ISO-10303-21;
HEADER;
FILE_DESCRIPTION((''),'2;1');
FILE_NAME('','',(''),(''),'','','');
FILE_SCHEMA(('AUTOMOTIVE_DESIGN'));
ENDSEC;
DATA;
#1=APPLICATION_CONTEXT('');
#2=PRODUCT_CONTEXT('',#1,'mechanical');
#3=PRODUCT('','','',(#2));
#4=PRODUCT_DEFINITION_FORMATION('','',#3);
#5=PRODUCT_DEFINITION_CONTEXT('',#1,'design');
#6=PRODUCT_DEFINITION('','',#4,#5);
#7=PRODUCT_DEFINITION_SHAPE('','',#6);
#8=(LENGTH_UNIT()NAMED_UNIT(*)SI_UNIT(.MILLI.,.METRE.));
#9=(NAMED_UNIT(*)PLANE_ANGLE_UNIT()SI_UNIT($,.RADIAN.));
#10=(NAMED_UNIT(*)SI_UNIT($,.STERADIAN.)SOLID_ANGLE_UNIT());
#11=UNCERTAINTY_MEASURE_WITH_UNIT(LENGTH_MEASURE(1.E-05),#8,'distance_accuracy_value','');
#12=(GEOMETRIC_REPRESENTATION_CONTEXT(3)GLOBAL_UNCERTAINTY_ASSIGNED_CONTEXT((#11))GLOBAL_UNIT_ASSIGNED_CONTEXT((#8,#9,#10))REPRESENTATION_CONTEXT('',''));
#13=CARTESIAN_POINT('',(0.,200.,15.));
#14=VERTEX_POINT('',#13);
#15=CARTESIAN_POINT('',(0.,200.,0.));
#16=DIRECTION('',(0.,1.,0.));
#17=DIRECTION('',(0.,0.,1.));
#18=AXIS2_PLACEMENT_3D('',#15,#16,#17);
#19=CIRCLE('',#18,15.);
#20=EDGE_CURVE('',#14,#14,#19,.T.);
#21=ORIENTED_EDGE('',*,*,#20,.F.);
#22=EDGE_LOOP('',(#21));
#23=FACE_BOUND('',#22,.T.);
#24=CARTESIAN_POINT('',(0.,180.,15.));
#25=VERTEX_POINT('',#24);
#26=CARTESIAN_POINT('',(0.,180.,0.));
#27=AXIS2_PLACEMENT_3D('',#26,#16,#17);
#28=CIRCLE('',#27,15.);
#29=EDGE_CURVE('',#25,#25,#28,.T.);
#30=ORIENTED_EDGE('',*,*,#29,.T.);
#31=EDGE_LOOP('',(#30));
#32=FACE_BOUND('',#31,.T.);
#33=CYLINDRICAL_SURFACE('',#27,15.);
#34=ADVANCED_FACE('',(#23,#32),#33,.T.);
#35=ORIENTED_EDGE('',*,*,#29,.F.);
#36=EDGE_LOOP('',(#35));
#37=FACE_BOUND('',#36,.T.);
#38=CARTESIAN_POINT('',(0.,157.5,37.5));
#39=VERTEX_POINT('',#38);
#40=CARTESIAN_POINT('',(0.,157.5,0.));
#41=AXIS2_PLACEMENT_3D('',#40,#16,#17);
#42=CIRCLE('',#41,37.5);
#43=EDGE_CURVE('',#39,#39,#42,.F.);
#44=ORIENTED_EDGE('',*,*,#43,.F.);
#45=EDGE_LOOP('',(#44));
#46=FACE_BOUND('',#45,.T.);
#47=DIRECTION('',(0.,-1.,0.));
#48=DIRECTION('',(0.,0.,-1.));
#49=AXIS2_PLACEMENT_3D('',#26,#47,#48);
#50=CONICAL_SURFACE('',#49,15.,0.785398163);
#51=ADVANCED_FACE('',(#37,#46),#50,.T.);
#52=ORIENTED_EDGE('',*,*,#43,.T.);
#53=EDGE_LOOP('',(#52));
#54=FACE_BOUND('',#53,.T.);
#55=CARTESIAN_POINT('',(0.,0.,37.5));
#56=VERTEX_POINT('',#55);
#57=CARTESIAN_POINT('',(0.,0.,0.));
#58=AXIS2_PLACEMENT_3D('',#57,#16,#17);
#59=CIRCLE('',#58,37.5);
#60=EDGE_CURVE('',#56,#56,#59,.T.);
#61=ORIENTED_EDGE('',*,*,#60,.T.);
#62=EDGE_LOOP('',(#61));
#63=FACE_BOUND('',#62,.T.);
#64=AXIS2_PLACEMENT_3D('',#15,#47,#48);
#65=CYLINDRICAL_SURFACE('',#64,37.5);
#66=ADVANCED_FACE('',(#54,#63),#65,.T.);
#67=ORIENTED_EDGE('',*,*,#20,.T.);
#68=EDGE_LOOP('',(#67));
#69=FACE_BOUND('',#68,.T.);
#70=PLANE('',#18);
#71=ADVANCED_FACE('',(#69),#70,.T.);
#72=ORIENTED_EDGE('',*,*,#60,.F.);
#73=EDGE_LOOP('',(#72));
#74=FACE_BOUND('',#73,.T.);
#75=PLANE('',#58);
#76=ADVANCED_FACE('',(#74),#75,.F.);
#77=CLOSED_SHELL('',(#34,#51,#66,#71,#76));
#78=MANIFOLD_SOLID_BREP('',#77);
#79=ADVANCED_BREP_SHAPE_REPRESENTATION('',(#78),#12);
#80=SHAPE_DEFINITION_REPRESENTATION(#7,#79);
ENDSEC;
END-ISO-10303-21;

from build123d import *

# Parameters (mm, degrees)
ESQUISSE1_R         = 37.5
EXTRUSION1_DEPTH    = 200
ESQUISSE2_OUTSIDE_W = 122.276
ESQUISSE2_OUTSIDE_H = 122.276
ESQUISSE2_OUTSIDE_R = 15
EXTRUSION2_DEPTH    = 20
CHANFREIN1_SIZE     = 22.5


with BuildPart() as part:
    # Esquisse1 → Extrusion1 (new body)
    with BuildSketch(Plane(origin=(0, 0, 0), x_dir=(1, 0, 0), z_dir=(0, 1, 0))):
        with Locations(Location((0, 0, 0), (0, 0, 270))):
            Circle(ESQUISSE1_R)
    extrude(amount=EXTRUSION1_DEPTH)

    # Esquisse2 outside → Extrusion2 (cut)
    with BuildSketch(Plane(origin=(0, 200, 0), x_dir=(1, 0, 0), z_dir=(0, 1, 0))):
        Rectangle(ESQUISSE2_OUTSIDE_W, ESQUISSE2_OUTSIDE_H)
        with Locations(Location((0, 0, 0), (0, 0, 270))):
            Circle(ESQUISSE2_OUTSIDE_R, mode=Mode.SUBTRACT)
    extrude(amount=-EXTRUSION2_DEPTH, mode=Mode.SUBTRACT)

    # Chanfrein1
    chanfrein1_edges = [part.edges().sort_by_distance(p)[0] for p in [
        (0, 180, -37.5),
    ]]
    chamfer(chanfrein1_edges, length=CHANFREIN1_SIZE - 0.0001)  # a hair under: the kernel refuses the full size


solid = part.part
